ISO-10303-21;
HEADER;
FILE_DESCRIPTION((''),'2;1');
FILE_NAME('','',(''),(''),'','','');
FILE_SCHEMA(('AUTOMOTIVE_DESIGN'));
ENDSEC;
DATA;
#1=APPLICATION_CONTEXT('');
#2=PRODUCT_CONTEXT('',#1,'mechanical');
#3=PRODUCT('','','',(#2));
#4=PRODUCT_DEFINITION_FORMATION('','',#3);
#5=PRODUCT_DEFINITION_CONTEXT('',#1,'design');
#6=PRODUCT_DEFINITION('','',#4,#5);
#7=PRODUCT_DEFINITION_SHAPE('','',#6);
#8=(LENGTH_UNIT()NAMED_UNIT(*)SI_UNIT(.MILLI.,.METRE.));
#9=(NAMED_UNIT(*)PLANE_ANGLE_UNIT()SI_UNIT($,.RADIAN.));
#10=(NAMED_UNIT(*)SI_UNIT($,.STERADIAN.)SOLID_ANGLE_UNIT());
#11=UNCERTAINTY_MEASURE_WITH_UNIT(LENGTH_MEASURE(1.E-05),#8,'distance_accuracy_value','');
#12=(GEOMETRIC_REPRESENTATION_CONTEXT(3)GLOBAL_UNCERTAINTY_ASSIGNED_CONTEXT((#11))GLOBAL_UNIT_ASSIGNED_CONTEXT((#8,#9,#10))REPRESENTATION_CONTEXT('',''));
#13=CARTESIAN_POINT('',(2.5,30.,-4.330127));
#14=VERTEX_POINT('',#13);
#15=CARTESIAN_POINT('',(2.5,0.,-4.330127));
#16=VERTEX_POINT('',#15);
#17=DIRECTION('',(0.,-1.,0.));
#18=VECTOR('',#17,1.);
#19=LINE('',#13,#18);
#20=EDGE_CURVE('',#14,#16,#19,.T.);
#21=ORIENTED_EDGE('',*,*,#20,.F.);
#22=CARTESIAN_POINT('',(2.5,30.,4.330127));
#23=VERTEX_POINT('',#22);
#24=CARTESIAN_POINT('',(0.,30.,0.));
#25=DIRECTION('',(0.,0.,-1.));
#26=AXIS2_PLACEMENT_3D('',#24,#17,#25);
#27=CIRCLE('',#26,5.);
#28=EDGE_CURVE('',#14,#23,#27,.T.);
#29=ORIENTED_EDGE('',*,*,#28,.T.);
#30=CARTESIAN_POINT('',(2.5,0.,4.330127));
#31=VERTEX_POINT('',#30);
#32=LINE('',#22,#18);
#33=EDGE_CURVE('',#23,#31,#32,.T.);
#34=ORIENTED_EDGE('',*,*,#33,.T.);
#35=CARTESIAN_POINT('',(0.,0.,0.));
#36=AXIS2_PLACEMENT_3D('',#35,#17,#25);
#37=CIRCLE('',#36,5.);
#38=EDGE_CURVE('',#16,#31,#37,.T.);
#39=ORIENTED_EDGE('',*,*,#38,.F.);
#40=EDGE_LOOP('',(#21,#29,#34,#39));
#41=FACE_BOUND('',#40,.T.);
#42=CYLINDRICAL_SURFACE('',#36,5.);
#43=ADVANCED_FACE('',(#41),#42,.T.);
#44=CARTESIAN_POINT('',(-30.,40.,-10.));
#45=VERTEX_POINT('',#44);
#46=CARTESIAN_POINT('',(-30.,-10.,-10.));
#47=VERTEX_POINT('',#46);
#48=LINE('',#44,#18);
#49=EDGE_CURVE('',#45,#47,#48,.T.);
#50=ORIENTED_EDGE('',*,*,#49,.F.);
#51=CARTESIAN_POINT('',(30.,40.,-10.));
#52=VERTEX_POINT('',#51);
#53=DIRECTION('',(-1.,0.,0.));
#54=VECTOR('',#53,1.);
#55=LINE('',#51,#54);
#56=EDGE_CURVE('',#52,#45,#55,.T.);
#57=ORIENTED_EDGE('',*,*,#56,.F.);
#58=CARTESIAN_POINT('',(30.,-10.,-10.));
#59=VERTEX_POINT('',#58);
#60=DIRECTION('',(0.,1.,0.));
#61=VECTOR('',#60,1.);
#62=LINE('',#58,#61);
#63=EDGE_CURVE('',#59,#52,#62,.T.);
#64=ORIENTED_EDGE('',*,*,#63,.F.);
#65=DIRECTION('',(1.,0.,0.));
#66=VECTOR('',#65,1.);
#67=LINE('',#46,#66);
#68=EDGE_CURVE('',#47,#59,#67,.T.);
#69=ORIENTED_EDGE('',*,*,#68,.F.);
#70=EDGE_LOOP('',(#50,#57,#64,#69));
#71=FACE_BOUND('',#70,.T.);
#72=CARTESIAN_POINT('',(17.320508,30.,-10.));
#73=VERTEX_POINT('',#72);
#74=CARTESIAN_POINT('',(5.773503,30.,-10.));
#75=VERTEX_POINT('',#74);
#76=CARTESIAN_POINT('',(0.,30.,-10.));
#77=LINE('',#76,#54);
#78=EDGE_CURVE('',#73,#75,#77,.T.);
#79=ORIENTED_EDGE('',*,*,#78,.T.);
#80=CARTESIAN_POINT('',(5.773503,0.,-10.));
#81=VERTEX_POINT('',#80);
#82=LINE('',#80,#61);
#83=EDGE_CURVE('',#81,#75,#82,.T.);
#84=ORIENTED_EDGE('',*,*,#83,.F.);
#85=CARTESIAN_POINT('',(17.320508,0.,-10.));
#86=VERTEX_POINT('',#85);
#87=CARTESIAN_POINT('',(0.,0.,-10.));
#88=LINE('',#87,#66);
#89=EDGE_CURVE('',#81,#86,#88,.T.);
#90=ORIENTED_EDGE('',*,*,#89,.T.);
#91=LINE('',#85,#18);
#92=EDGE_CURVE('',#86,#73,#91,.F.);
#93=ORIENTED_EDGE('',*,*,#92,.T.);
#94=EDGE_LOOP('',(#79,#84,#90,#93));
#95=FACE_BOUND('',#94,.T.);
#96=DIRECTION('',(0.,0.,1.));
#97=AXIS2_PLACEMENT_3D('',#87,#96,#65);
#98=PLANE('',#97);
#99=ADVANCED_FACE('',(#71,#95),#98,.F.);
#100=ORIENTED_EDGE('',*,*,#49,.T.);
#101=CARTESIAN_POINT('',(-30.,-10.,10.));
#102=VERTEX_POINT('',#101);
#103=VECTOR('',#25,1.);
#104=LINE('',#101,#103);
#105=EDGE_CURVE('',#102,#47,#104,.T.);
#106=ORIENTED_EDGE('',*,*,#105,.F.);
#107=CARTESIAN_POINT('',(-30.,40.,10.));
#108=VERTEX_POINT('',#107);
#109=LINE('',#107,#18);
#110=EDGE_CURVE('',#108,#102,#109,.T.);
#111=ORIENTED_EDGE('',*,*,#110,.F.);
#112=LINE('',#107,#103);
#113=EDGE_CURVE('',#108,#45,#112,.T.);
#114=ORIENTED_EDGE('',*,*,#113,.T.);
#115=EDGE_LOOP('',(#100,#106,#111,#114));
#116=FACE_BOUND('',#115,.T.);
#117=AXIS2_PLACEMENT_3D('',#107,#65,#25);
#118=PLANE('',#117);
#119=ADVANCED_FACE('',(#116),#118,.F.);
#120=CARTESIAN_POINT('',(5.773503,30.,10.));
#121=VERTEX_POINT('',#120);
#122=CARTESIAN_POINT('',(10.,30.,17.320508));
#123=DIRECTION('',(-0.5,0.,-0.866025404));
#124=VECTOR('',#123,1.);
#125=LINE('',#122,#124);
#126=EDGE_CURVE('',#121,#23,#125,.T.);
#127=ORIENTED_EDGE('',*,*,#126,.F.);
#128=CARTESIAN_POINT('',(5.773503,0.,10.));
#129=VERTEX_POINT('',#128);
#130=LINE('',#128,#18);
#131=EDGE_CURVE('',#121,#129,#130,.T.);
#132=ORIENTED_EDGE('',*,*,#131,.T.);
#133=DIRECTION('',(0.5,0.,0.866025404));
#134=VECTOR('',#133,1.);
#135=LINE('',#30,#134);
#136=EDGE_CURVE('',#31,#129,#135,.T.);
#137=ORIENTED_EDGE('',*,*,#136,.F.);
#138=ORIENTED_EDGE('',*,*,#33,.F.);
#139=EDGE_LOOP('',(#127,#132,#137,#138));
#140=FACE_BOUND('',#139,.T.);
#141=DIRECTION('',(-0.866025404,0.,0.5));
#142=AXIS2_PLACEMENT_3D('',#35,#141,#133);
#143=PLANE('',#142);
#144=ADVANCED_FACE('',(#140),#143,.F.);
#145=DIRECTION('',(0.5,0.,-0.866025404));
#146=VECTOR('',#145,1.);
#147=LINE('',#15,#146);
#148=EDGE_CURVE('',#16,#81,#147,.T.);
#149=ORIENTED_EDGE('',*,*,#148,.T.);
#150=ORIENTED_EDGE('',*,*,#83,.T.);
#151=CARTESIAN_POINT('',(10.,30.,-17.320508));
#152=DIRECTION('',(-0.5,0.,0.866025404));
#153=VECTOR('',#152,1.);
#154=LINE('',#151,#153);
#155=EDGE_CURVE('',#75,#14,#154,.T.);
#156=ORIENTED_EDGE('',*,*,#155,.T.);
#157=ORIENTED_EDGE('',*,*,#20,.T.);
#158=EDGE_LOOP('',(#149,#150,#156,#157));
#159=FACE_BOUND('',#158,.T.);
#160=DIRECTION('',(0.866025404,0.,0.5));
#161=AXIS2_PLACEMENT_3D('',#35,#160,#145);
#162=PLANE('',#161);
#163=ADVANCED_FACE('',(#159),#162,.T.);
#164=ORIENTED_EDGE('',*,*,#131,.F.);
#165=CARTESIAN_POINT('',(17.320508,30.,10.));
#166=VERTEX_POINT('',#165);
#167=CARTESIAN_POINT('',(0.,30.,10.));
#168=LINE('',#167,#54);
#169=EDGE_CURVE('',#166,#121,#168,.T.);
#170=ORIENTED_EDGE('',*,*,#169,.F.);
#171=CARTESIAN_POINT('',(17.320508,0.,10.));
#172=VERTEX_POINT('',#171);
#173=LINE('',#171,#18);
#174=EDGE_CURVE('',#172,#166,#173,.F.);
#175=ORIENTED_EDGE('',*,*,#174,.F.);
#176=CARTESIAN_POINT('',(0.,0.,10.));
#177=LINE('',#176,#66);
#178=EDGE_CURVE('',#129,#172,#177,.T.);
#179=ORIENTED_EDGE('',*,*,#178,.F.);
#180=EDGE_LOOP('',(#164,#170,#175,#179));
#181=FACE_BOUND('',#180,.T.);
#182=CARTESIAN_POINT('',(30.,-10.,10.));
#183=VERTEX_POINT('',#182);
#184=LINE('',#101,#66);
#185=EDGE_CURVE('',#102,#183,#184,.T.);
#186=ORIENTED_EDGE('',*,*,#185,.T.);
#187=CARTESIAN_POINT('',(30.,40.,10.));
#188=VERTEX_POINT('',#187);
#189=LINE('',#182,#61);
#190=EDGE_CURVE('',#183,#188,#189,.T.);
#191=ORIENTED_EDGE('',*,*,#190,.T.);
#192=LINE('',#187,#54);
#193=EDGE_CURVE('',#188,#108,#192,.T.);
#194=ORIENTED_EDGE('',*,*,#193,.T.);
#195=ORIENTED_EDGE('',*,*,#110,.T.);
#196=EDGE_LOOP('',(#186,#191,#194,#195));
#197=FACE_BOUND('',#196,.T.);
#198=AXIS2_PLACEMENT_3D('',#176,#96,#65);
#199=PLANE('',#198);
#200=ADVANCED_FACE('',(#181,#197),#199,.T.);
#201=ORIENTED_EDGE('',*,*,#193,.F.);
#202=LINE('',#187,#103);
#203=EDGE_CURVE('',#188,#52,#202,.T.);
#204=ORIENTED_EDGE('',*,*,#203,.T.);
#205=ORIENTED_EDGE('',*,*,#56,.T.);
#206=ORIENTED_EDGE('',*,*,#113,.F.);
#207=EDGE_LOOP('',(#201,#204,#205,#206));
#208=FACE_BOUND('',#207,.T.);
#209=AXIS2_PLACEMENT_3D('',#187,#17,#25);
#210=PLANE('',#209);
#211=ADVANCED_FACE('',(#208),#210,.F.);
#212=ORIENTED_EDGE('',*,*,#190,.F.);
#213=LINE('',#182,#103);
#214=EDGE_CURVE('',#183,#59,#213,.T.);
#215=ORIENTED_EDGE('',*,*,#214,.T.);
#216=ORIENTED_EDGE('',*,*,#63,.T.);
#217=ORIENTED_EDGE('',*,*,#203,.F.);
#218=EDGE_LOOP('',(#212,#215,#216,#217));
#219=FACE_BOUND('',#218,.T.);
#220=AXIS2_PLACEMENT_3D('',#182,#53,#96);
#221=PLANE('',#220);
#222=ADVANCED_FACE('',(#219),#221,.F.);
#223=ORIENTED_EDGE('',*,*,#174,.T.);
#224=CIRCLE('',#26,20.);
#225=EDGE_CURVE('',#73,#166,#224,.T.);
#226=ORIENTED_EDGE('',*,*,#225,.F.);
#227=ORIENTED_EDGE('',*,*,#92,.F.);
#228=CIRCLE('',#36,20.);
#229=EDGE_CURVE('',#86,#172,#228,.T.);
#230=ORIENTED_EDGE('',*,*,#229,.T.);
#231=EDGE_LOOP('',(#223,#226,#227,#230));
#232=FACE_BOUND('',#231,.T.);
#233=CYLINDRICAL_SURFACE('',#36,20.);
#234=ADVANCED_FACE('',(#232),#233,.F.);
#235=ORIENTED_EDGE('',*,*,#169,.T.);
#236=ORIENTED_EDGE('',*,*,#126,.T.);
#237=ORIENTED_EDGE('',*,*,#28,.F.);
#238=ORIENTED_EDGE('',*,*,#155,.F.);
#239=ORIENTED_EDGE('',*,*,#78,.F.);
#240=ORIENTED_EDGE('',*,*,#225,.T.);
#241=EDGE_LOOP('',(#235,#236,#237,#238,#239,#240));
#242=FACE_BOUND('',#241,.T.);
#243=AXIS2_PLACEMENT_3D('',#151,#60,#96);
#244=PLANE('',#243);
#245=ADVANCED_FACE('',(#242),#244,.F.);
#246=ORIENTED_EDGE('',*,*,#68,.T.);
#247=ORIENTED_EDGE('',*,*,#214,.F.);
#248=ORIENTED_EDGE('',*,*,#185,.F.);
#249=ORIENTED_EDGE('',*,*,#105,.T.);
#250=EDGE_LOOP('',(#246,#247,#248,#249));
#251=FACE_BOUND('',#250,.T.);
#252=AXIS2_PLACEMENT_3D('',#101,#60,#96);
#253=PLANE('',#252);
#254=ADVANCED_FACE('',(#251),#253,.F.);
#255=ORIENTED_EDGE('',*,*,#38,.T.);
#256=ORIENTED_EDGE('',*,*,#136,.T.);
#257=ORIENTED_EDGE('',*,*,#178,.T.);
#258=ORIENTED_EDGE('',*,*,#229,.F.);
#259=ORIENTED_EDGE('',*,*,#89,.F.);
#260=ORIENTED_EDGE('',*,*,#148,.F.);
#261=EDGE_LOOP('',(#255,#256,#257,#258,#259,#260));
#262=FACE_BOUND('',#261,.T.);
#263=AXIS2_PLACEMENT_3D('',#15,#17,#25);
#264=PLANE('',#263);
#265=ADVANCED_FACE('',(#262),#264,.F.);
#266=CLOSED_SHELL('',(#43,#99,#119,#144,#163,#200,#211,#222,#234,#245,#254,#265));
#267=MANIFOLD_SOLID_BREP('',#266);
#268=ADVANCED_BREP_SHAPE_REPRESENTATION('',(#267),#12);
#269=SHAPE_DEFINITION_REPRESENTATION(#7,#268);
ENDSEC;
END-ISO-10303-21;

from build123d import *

# Parameters (mm, degrees)
SKETCH1_W           = 60
SKETCH1_H           = 50
BOSS_EXTRUDE1_DEPTH = 10
CUT_REVOLVE1_DEPTH  = 30


# Read off the part's stored shape, not the designer's step: Cut-Revolve1
with BuildPart() as part:
    # Sketch1 → Boss-Extrude1 (new, symmetric)
    with BuildSketch(Plane.XY):
        with Locations((0, 15)):
            Rectangle(SKETCH1_W, SKETCH1_H)
    extrude(amount=BOSS_EXTRUDE1_DEPTH, both=True)

    # Cut-Revolve1 outline → Cut-Revolve1 (cut)
    with BuildSketch(Plane(origin=(0, 0, 0), x_dir=(1, 0, 0), z_dir=(0, 1, 0))):
        with BuildLine():
            ThreePointArc((17.320508076, -10), (20, 0), (17.320508076, 10))
            Line((17.320508076, 10), (5.773502692, 10))
            Line((5.773502692, 10), (2.5, 4.330127019))
            ThreePointArc((2.5, 4.330127019), (5, 0), (2.5, -4.330127019))
            Line((2.5, -4.330127019), (5.773502692, -10))
            Line((5.773502692, -10), (17.320508076, -10))
        make_face()
    extrude(amount=CUT_REVOLVE1_DEPTH, mode=Mode.SUBTRACT)


solid = part.part
